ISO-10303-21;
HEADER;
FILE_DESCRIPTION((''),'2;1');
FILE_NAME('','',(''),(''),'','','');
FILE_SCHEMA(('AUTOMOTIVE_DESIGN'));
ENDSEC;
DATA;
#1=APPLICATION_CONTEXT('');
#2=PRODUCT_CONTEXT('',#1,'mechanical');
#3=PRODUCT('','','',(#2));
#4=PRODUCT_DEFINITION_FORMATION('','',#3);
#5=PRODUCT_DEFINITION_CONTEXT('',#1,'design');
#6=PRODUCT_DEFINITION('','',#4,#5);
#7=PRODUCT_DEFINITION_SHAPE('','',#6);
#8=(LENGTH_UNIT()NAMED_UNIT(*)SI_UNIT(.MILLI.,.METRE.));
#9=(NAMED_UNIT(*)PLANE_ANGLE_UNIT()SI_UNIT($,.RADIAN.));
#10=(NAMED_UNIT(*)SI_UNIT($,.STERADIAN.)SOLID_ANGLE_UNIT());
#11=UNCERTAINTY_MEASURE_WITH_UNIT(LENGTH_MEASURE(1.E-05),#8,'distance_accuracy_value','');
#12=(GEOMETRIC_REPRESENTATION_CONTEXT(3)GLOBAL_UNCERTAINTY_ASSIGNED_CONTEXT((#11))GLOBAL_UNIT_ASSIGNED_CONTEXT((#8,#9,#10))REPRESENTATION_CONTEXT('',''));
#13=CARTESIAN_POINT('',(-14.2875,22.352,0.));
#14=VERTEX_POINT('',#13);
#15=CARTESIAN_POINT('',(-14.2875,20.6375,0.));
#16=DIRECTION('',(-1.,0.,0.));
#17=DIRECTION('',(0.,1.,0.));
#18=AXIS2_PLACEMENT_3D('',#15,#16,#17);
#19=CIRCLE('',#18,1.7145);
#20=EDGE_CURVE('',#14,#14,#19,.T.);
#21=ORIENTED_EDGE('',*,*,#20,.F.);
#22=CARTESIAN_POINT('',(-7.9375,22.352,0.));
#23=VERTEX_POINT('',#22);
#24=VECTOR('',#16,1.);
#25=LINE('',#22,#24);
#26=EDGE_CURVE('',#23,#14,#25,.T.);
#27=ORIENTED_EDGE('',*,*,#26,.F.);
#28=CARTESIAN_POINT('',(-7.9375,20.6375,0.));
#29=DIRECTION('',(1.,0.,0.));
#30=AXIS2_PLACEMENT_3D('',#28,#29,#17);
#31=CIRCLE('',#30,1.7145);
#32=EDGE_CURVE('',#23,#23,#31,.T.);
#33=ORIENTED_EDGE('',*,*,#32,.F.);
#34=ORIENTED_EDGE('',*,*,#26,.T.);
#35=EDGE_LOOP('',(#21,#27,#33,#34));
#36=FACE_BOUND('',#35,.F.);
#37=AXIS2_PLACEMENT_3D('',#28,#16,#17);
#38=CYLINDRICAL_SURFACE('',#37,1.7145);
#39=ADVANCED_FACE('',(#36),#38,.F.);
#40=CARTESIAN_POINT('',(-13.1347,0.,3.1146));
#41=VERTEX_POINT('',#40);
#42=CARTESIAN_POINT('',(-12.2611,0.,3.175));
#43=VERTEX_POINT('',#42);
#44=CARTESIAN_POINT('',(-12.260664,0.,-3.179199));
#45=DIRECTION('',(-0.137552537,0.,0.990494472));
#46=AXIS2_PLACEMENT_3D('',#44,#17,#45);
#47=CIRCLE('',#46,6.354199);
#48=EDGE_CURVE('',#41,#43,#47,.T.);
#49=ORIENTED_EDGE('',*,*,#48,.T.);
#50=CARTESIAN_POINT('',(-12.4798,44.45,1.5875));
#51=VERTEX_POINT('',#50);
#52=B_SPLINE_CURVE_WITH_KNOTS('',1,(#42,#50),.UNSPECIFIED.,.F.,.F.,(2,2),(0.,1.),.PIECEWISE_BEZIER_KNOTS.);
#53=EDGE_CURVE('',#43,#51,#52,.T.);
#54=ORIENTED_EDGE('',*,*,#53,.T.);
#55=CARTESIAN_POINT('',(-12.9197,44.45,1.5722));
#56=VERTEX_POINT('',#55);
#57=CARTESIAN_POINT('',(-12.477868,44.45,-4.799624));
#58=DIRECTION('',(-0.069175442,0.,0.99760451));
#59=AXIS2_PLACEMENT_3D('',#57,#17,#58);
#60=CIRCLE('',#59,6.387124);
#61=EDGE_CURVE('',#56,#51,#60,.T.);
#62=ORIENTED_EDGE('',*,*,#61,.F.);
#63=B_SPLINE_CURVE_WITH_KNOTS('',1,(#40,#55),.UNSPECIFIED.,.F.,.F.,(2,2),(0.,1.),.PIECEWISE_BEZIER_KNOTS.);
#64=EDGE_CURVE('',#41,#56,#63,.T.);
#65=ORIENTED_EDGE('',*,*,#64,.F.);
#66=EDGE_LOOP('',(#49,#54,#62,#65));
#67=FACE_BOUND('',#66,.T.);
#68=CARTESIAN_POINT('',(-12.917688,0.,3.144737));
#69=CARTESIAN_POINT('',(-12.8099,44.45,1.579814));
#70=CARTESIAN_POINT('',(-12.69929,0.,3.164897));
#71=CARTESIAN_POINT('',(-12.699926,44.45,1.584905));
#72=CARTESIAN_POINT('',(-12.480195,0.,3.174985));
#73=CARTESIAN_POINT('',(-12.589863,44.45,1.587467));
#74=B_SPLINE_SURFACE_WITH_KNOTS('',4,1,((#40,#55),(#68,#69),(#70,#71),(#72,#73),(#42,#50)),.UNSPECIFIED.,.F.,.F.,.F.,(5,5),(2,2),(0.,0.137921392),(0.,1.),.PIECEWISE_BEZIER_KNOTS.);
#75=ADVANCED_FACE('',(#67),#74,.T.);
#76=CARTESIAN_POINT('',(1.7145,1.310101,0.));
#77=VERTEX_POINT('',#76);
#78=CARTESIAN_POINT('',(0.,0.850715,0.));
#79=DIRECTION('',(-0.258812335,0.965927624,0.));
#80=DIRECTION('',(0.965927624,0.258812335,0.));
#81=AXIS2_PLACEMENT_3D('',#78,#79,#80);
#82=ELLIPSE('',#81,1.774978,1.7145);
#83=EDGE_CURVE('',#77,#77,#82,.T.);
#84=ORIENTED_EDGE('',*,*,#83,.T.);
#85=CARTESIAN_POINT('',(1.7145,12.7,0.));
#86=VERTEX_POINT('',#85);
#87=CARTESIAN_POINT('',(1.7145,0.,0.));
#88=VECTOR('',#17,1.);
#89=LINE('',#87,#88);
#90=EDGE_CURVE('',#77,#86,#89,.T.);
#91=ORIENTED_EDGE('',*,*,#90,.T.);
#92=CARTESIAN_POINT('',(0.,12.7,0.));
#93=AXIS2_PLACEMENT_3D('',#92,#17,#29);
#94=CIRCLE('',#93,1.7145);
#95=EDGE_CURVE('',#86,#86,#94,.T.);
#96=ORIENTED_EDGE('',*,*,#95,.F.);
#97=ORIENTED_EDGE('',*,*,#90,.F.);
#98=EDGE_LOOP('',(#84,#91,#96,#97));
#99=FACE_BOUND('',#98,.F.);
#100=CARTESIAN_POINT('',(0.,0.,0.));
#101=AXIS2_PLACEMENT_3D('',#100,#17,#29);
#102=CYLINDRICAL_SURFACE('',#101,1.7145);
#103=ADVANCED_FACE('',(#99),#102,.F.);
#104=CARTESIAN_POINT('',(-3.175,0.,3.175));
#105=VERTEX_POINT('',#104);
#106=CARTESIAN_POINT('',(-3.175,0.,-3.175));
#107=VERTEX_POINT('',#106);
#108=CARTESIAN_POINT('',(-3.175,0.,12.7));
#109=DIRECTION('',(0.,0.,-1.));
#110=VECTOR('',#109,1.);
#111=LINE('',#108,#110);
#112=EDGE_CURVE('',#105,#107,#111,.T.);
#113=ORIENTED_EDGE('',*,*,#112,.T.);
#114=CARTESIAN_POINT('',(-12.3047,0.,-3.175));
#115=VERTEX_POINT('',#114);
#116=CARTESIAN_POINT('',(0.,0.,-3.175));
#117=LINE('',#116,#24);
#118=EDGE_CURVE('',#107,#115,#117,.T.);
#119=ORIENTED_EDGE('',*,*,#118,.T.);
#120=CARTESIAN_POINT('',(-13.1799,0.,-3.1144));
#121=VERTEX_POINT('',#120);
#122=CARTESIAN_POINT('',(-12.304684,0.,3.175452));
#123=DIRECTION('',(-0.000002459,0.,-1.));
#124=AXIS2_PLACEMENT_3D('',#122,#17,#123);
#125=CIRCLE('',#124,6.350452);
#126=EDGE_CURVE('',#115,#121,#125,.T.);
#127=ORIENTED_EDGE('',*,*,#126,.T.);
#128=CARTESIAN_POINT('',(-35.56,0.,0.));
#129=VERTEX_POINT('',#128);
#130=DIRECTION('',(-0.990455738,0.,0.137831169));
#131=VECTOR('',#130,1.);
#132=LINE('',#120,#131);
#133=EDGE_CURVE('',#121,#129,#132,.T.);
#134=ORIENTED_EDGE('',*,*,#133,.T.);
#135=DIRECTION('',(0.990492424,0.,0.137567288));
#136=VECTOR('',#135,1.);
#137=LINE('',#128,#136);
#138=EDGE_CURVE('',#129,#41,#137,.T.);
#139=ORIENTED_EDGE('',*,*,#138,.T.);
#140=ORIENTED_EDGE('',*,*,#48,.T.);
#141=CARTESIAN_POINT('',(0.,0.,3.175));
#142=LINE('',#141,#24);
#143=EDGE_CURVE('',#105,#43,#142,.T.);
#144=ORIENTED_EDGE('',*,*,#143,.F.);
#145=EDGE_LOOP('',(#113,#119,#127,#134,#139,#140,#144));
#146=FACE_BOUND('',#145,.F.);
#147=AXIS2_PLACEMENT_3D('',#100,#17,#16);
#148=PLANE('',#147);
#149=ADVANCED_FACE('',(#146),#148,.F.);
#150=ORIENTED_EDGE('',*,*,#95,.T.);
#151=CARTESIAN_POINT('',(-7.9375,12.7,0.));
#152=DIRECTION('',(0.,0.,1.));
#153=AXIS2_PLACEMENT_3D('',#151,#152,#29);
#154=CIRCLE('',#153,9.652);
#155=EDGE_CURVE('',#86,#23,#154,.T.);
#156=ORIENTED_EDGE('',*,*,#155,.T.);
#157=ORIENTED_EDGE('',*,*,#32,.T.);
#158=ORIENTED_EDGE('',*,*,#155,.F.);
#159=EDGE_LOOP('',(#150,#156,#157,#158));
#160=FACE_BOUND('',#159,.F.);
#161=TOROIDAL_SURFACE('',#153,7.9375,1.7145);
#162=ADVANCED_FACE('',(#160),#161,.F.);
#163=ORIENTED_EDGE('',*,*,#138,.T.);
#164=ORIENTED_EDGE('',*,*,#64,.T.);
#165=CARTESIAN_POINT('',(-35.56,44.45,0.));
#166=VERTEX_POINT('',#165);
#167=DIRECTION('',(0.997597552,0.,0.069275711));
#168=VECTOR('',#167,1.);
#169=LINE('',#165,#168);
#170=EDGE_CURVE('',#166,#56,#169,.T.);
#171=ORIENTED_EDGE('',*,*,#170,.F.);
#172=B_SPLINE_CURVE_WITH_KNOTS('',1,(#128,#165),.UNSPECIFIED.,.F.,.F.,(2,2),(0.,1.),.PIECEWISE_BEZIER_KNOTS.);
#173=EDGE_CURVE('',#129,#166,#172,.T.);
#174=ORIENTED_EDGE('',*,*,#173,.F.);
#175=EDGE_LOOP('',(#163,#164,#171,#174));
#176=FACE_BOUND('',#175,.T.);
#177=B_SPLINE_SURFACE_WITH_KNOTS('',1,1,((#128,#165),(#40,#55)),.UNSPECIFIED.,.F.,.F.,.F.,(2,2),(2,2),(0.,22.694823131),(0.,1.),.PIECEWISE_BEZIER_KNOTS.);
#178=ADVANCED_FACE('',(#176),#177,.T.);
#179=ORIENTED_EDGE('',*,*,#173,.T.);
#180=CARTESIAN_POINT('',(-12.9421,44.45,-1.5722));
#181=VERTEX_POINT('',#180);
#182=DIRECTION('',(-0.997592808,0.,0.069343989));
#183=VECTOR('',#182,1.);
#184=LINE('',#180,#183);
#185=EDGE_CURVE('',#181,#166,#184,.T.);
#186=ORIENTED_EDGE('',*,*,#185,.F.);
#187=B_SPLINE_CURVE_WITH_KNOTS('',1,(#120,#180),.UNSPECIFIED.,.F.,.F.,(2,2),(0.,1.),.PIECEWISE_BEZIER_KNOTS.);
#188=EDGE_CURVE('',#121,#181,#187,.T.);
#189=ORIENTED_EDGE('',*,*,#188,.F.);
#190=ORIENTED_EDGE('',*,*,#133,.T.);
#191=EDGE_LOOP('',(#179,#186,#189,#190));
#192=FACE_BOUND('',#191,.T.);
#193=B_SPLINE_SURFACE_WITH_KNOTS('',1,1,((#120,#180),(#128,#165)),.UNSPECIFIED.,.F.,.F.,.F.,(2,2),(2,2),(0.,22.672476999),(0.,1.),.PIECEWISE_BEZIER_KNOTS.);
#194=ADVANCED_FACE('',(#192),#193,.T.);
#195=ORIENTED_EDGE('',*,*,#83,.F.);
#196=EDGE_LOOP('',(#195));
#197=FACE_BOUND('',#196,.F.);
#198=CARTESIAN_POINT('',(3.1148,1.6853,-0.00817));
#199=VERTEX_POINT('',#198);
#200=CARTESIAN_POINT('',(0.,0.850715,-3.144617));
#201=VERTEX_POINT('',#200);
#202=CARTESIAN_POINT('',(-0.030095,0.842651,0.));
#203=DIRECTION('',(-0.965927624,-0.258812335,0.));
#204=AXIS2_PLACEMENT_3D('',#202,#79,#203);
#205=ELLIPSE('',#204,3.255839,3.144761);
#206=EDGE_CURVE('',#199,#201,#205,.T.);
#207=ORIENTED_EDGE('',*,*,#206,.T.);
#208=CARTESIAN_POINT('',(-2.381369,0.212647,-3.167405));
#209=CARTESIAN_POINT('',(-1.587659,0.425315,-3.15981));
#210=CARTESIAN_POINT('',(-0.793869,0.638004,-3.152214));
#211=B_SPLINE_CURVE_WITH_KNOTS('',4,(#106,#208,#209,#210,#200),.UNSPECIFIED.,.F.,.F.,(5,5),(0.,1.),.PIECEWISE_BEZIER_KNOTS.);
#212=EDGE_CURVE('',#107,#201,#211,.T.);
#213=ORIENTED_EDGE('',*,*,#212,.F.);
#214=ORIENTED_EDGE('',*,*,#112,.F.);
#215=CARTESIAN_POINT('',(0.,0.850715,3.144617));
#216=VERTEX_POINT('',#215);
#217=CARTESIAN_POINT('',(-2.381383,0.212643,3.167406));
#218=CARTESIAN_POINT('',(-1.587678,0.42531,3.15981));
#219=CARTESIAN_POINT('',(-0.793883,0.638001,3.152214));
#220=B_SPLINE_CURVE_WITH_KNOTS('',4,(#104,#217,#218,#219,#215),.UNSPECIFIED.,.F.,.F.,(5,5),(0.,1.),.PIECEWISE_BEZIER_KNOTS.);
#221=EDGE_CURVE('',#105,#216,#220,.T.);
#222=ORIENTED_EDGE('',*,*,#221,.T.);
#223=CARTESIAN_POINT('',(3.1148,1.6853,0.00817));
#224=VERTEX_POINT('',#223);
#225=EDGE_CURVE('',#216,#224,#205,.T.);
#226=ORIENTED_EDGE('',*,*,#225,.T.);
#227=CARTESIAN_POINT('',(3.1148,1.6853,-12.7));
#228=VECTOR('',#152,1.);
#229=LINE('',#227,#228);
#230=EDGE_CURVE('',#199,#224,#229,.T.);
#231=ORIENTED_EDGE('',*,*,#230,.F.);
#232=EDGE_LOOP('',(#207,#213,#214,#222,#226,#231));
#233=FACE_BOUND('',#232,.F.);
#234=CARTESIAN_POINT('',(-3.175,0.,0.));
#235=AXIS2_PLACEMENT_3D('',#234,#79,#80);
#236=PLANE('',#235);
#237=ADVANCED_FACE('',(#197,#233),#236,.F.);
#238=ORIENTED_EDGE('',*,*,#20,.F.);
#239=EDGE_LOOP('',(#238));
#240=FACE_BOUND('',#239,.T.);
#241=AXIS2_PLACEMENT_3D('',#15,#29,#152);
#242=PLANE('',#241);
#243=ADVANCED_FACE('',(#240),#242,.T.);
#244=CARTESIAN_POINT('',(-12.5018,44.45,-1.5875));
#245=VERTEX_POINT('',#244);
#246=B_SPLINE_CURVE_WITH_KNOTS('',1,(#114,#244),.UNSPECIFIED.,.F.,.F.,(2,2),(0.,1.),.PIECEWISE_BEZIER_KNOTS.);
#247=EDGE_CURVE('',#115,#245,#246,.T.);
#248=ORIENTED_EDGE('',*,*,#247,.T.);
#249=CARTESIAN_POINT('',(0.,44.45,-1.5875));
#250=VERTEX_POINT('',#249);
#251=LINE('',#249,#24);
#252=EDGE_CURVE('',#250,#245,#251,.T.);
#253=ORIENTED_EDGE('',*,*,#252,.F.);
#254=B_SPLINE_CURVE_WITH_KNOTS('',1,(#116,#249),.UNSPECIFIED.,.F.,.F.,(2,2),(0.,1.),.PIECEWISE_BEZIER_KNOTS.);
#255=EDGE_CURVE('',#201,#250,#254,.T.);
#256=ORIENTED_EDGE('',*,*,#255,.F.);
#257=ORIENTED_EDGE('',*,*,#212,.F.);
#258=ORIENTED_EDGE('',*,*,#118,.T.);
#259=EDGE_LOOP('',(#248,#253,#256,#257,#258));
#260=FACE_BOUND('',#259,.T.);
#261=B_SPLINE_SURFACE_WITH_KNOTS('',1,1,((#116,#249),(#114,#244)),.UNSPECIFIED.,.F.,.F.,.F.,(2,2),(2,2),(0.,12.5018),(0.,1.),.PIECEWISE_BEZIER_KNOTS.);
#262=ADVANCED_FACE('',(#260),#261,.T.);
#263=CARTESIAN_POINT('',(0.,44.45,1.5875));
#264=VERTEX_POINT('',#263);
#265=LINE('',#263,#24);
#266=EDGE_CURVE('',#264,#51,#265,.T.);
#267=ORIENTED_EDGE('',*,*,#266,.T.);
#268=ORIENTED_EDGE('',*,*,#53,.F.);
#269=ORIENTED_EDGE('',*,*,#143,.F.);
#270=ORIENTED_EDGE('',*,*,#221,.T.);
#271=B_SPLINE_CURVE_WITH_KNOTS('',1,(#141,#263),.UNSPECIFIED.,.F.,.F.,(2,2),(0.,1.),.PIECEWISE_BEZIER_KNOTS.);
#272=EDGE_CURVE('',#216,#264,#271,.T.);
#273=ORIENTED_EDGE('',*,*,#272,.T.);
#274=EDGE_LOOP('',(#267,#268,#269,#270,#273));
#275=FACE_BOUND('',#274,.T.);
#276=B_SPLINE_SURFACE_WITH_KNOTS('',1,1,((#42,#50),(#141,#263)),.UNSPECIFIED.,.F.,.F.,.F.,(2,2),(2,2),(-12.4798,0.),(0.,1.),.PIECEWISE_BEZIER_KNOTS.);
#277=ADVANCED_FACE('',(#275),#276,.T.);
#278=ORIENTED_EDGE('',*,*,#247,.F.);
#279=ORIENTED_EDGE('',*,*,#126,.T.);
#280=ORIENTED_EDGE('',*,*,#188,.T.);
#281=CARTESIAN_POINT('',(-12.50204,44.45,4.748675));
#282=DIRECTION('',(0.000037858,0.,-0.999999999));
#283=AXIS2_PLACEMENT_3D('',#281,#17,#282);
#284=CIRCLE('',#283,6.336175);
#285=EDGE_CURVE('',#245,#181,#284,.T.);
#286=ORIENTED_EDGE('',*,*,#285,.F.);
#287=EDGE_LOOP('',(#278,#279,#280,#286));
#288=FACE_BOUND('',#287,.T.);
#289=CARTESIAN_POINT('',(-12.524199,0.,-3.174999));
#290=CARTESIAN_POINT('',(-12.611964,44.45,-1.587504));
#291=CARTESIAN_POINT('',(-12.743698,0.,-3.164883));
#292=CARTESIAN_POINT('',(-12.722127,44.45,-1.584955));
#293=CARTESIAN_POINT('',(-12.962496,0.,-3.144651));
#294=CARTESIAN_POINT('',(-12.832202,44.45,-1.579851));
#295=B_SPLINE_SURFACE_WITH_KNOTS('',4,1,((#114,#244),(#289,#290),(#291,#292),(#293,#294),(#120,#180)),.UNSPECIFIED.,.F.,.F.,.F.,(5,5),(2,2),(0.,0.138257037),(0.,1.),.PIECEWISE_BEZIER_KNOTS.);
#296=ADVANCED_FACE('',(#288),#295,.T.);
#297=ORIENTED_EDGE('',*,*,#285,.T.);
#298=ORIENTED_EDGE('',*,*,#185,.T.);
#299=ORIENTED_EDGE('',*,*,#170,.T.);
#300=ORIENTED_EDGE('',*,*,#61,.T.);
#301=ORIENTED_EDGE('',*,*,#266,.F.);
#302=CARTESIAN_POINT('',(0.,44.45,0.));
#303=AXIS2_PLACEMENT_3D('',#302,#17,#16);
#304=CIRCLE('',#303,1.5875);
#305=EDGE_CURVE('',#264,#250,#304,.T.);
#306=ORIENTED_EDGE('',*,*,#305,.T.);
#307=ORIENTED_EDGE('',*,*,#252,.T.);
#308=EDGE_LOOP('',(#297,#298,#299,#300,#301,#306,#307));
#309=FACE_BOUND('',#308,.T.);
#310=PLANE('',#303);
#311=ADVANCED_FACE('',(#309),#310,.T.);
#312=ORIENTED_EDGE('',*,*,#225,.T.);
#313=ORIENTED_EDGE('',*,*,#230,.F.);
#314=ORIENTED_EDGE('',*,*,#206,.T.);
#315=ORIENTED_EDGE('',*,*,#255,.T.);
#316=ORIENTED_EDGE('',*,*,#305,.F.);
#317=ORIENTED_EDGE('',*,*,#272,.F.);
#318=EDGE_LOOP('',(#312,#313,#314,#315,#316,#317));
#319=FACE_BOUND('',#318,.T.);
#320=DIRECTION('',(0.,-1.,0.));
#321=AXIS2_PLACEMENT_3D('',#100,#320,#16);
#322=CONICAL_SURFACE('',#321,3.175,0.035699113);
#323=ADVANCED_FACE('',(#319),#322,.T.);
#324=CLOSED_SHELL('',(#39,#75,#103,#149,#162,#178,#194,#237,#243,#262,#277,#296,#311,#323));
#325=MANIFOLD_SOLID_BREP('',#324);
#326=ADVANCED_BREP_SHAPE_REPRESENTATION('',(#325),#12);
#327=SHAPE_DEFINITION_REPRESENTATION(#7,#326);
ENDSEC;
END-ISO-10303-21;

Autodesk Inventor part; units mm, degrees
ref_plane "YZ Plane" through (0, 0, 0) normal (1, 0, 0) x (0, 1, 0)
ref_plane "XY Plane" through (0, 0, 0) normal (0, 0, 1) x (1, 0, 0)
sketch "Sketch2" plane through (0, 0, 0) normal (0, 1, 0) x (-1, 0, 0)
  circle A0 centre (0, 0) radius 3.175
  line L0 (0, 0) -> (35.56, 0)
  line L1 (0, 3.175) -> (12.2611, 3.175)
  line L2 (0, -3.175) -> (12.3047, -3.175)
  line L3 (13.1799, -3.1144) -> (35.56, 0)
  line L4 (35.56, 0) -> (13.1347, 3.1146)
  arc A1 (13.1347, 3.1146) -> (12.2611, 3.175) centre (12.2611, -3.175) ccw
  arc A2 (12.3047, -3.175) -> (13.1799, -3.1144) centre (12.3047, 3.175) ccw
  circle A3 centre (0, 0) radius 1.5875
  point P0 (12.7, 3.175)
  dimension "d5" = 6.35
  dimension "d6" = 35.56
  dimension "d7" = 12.7
  dimension "d8" = 6.35
  dimension "d9" = 6.35
  dimension "d12" = 3.175
ref_plane "Work Plane1" through (0, 44.45, 0) normal (0, 1, 0) x (-1, 0, 0)
sketch "Sketch3" plane through (0, 44.45, 0) normal (0, 1, 0) x (-1, 0, 0)
  circle A0 centre (0, 0) radius 1.5875
  line L0 (0, 1.5875) -> (12.4798, 1.5875)
  line L1 (0, -1.5875) -> (12.5018, -1.5875)
  line L2 (12.9421, -1.5722) -> (35.56, 0)
  line L3 (35.56, 0) -> (12.9197, 1.5722)
  arc A1 (12.9197, 1.5722) -> (12.4798, 1.5875) centre (12.4798, -4.7625) ccw
  arc A2 (12.5018, -1.5875) -> (12.9421, -1.5722) centre (12.5018, 4.7625) ccw
  point P0 (12.7, 1.5875)
  dimension "d14" = 3.175
  dimension "d15" = 12.7
  dimension "d16" = 6.35
  dimension "d17" = 6.35
loft "Loft1" add profiles "Sketch2", "Sketch3" contours A0 | L0 L3 A2 L2 A0 | A0 L1 A1 L4 L0 | A3 / all
sketch "Sketch4" plane through (0, 0, 0) normal (0, 0, 1) x (1, 0, 0)
  line L0 (-12.2611, 0) -> (0, 0) projected
  line L1 (0, 0) -> (0, 12.7)
  line L2 (0, 0) -> (0, 44.45) projected
  line L3 (0, 12.7) -> (-7.9375, 12.7)
  line L4 (-7.9375, 12.7) -> (-7.9375, 20.6375)
  arc A0 (0, 12.7) -> (-7.9375, 20.6375) centre (-7.9375, 12.7) ccw
  line L5 (-7.9375, 20.6375) -> (-14.2875, 20.6375)
  dimension "d22" = 12.7
  dimension "d23" = 7.9375
  dimension "d24" = 7.9375
  dimension "d25" = 6.35
sketch "Sketch5" plane through (-12.3047, 0, -3.175) normal (0, -1, 0) x (1, 0, 0)
  circle A0 centre (12.3047, 3.175) radius 1.7145
  dimension "d26" = 3.429
sweep "Sweep1" cut profiles "Sketch5" path "Sketch4" path curves L1 A0 L5
sketch "Sketch6" plane through (0, 0, 0) normal (0, 0, 1) x (1, 0, 0)
  line L0 (3.175, 0) -> (0, 0) projected
  line L1 (3.175, 0) -> (-3.175, 0)
  line L2 (0, 0) -> (-12.3047, 0) projected
  line L3 (-3.175, 0) -> (3.1148, 1.6853)
  line L4 (3.175, 0) -> (1.5875, 44.45) projected
  dimension "d29" = 6.35
  dimension "d30" = 15
extrude "Extrusion3" cut sketch "Sketch6" along normal mid plane 25.4
properties part number "RudderUpperControlSurface"
